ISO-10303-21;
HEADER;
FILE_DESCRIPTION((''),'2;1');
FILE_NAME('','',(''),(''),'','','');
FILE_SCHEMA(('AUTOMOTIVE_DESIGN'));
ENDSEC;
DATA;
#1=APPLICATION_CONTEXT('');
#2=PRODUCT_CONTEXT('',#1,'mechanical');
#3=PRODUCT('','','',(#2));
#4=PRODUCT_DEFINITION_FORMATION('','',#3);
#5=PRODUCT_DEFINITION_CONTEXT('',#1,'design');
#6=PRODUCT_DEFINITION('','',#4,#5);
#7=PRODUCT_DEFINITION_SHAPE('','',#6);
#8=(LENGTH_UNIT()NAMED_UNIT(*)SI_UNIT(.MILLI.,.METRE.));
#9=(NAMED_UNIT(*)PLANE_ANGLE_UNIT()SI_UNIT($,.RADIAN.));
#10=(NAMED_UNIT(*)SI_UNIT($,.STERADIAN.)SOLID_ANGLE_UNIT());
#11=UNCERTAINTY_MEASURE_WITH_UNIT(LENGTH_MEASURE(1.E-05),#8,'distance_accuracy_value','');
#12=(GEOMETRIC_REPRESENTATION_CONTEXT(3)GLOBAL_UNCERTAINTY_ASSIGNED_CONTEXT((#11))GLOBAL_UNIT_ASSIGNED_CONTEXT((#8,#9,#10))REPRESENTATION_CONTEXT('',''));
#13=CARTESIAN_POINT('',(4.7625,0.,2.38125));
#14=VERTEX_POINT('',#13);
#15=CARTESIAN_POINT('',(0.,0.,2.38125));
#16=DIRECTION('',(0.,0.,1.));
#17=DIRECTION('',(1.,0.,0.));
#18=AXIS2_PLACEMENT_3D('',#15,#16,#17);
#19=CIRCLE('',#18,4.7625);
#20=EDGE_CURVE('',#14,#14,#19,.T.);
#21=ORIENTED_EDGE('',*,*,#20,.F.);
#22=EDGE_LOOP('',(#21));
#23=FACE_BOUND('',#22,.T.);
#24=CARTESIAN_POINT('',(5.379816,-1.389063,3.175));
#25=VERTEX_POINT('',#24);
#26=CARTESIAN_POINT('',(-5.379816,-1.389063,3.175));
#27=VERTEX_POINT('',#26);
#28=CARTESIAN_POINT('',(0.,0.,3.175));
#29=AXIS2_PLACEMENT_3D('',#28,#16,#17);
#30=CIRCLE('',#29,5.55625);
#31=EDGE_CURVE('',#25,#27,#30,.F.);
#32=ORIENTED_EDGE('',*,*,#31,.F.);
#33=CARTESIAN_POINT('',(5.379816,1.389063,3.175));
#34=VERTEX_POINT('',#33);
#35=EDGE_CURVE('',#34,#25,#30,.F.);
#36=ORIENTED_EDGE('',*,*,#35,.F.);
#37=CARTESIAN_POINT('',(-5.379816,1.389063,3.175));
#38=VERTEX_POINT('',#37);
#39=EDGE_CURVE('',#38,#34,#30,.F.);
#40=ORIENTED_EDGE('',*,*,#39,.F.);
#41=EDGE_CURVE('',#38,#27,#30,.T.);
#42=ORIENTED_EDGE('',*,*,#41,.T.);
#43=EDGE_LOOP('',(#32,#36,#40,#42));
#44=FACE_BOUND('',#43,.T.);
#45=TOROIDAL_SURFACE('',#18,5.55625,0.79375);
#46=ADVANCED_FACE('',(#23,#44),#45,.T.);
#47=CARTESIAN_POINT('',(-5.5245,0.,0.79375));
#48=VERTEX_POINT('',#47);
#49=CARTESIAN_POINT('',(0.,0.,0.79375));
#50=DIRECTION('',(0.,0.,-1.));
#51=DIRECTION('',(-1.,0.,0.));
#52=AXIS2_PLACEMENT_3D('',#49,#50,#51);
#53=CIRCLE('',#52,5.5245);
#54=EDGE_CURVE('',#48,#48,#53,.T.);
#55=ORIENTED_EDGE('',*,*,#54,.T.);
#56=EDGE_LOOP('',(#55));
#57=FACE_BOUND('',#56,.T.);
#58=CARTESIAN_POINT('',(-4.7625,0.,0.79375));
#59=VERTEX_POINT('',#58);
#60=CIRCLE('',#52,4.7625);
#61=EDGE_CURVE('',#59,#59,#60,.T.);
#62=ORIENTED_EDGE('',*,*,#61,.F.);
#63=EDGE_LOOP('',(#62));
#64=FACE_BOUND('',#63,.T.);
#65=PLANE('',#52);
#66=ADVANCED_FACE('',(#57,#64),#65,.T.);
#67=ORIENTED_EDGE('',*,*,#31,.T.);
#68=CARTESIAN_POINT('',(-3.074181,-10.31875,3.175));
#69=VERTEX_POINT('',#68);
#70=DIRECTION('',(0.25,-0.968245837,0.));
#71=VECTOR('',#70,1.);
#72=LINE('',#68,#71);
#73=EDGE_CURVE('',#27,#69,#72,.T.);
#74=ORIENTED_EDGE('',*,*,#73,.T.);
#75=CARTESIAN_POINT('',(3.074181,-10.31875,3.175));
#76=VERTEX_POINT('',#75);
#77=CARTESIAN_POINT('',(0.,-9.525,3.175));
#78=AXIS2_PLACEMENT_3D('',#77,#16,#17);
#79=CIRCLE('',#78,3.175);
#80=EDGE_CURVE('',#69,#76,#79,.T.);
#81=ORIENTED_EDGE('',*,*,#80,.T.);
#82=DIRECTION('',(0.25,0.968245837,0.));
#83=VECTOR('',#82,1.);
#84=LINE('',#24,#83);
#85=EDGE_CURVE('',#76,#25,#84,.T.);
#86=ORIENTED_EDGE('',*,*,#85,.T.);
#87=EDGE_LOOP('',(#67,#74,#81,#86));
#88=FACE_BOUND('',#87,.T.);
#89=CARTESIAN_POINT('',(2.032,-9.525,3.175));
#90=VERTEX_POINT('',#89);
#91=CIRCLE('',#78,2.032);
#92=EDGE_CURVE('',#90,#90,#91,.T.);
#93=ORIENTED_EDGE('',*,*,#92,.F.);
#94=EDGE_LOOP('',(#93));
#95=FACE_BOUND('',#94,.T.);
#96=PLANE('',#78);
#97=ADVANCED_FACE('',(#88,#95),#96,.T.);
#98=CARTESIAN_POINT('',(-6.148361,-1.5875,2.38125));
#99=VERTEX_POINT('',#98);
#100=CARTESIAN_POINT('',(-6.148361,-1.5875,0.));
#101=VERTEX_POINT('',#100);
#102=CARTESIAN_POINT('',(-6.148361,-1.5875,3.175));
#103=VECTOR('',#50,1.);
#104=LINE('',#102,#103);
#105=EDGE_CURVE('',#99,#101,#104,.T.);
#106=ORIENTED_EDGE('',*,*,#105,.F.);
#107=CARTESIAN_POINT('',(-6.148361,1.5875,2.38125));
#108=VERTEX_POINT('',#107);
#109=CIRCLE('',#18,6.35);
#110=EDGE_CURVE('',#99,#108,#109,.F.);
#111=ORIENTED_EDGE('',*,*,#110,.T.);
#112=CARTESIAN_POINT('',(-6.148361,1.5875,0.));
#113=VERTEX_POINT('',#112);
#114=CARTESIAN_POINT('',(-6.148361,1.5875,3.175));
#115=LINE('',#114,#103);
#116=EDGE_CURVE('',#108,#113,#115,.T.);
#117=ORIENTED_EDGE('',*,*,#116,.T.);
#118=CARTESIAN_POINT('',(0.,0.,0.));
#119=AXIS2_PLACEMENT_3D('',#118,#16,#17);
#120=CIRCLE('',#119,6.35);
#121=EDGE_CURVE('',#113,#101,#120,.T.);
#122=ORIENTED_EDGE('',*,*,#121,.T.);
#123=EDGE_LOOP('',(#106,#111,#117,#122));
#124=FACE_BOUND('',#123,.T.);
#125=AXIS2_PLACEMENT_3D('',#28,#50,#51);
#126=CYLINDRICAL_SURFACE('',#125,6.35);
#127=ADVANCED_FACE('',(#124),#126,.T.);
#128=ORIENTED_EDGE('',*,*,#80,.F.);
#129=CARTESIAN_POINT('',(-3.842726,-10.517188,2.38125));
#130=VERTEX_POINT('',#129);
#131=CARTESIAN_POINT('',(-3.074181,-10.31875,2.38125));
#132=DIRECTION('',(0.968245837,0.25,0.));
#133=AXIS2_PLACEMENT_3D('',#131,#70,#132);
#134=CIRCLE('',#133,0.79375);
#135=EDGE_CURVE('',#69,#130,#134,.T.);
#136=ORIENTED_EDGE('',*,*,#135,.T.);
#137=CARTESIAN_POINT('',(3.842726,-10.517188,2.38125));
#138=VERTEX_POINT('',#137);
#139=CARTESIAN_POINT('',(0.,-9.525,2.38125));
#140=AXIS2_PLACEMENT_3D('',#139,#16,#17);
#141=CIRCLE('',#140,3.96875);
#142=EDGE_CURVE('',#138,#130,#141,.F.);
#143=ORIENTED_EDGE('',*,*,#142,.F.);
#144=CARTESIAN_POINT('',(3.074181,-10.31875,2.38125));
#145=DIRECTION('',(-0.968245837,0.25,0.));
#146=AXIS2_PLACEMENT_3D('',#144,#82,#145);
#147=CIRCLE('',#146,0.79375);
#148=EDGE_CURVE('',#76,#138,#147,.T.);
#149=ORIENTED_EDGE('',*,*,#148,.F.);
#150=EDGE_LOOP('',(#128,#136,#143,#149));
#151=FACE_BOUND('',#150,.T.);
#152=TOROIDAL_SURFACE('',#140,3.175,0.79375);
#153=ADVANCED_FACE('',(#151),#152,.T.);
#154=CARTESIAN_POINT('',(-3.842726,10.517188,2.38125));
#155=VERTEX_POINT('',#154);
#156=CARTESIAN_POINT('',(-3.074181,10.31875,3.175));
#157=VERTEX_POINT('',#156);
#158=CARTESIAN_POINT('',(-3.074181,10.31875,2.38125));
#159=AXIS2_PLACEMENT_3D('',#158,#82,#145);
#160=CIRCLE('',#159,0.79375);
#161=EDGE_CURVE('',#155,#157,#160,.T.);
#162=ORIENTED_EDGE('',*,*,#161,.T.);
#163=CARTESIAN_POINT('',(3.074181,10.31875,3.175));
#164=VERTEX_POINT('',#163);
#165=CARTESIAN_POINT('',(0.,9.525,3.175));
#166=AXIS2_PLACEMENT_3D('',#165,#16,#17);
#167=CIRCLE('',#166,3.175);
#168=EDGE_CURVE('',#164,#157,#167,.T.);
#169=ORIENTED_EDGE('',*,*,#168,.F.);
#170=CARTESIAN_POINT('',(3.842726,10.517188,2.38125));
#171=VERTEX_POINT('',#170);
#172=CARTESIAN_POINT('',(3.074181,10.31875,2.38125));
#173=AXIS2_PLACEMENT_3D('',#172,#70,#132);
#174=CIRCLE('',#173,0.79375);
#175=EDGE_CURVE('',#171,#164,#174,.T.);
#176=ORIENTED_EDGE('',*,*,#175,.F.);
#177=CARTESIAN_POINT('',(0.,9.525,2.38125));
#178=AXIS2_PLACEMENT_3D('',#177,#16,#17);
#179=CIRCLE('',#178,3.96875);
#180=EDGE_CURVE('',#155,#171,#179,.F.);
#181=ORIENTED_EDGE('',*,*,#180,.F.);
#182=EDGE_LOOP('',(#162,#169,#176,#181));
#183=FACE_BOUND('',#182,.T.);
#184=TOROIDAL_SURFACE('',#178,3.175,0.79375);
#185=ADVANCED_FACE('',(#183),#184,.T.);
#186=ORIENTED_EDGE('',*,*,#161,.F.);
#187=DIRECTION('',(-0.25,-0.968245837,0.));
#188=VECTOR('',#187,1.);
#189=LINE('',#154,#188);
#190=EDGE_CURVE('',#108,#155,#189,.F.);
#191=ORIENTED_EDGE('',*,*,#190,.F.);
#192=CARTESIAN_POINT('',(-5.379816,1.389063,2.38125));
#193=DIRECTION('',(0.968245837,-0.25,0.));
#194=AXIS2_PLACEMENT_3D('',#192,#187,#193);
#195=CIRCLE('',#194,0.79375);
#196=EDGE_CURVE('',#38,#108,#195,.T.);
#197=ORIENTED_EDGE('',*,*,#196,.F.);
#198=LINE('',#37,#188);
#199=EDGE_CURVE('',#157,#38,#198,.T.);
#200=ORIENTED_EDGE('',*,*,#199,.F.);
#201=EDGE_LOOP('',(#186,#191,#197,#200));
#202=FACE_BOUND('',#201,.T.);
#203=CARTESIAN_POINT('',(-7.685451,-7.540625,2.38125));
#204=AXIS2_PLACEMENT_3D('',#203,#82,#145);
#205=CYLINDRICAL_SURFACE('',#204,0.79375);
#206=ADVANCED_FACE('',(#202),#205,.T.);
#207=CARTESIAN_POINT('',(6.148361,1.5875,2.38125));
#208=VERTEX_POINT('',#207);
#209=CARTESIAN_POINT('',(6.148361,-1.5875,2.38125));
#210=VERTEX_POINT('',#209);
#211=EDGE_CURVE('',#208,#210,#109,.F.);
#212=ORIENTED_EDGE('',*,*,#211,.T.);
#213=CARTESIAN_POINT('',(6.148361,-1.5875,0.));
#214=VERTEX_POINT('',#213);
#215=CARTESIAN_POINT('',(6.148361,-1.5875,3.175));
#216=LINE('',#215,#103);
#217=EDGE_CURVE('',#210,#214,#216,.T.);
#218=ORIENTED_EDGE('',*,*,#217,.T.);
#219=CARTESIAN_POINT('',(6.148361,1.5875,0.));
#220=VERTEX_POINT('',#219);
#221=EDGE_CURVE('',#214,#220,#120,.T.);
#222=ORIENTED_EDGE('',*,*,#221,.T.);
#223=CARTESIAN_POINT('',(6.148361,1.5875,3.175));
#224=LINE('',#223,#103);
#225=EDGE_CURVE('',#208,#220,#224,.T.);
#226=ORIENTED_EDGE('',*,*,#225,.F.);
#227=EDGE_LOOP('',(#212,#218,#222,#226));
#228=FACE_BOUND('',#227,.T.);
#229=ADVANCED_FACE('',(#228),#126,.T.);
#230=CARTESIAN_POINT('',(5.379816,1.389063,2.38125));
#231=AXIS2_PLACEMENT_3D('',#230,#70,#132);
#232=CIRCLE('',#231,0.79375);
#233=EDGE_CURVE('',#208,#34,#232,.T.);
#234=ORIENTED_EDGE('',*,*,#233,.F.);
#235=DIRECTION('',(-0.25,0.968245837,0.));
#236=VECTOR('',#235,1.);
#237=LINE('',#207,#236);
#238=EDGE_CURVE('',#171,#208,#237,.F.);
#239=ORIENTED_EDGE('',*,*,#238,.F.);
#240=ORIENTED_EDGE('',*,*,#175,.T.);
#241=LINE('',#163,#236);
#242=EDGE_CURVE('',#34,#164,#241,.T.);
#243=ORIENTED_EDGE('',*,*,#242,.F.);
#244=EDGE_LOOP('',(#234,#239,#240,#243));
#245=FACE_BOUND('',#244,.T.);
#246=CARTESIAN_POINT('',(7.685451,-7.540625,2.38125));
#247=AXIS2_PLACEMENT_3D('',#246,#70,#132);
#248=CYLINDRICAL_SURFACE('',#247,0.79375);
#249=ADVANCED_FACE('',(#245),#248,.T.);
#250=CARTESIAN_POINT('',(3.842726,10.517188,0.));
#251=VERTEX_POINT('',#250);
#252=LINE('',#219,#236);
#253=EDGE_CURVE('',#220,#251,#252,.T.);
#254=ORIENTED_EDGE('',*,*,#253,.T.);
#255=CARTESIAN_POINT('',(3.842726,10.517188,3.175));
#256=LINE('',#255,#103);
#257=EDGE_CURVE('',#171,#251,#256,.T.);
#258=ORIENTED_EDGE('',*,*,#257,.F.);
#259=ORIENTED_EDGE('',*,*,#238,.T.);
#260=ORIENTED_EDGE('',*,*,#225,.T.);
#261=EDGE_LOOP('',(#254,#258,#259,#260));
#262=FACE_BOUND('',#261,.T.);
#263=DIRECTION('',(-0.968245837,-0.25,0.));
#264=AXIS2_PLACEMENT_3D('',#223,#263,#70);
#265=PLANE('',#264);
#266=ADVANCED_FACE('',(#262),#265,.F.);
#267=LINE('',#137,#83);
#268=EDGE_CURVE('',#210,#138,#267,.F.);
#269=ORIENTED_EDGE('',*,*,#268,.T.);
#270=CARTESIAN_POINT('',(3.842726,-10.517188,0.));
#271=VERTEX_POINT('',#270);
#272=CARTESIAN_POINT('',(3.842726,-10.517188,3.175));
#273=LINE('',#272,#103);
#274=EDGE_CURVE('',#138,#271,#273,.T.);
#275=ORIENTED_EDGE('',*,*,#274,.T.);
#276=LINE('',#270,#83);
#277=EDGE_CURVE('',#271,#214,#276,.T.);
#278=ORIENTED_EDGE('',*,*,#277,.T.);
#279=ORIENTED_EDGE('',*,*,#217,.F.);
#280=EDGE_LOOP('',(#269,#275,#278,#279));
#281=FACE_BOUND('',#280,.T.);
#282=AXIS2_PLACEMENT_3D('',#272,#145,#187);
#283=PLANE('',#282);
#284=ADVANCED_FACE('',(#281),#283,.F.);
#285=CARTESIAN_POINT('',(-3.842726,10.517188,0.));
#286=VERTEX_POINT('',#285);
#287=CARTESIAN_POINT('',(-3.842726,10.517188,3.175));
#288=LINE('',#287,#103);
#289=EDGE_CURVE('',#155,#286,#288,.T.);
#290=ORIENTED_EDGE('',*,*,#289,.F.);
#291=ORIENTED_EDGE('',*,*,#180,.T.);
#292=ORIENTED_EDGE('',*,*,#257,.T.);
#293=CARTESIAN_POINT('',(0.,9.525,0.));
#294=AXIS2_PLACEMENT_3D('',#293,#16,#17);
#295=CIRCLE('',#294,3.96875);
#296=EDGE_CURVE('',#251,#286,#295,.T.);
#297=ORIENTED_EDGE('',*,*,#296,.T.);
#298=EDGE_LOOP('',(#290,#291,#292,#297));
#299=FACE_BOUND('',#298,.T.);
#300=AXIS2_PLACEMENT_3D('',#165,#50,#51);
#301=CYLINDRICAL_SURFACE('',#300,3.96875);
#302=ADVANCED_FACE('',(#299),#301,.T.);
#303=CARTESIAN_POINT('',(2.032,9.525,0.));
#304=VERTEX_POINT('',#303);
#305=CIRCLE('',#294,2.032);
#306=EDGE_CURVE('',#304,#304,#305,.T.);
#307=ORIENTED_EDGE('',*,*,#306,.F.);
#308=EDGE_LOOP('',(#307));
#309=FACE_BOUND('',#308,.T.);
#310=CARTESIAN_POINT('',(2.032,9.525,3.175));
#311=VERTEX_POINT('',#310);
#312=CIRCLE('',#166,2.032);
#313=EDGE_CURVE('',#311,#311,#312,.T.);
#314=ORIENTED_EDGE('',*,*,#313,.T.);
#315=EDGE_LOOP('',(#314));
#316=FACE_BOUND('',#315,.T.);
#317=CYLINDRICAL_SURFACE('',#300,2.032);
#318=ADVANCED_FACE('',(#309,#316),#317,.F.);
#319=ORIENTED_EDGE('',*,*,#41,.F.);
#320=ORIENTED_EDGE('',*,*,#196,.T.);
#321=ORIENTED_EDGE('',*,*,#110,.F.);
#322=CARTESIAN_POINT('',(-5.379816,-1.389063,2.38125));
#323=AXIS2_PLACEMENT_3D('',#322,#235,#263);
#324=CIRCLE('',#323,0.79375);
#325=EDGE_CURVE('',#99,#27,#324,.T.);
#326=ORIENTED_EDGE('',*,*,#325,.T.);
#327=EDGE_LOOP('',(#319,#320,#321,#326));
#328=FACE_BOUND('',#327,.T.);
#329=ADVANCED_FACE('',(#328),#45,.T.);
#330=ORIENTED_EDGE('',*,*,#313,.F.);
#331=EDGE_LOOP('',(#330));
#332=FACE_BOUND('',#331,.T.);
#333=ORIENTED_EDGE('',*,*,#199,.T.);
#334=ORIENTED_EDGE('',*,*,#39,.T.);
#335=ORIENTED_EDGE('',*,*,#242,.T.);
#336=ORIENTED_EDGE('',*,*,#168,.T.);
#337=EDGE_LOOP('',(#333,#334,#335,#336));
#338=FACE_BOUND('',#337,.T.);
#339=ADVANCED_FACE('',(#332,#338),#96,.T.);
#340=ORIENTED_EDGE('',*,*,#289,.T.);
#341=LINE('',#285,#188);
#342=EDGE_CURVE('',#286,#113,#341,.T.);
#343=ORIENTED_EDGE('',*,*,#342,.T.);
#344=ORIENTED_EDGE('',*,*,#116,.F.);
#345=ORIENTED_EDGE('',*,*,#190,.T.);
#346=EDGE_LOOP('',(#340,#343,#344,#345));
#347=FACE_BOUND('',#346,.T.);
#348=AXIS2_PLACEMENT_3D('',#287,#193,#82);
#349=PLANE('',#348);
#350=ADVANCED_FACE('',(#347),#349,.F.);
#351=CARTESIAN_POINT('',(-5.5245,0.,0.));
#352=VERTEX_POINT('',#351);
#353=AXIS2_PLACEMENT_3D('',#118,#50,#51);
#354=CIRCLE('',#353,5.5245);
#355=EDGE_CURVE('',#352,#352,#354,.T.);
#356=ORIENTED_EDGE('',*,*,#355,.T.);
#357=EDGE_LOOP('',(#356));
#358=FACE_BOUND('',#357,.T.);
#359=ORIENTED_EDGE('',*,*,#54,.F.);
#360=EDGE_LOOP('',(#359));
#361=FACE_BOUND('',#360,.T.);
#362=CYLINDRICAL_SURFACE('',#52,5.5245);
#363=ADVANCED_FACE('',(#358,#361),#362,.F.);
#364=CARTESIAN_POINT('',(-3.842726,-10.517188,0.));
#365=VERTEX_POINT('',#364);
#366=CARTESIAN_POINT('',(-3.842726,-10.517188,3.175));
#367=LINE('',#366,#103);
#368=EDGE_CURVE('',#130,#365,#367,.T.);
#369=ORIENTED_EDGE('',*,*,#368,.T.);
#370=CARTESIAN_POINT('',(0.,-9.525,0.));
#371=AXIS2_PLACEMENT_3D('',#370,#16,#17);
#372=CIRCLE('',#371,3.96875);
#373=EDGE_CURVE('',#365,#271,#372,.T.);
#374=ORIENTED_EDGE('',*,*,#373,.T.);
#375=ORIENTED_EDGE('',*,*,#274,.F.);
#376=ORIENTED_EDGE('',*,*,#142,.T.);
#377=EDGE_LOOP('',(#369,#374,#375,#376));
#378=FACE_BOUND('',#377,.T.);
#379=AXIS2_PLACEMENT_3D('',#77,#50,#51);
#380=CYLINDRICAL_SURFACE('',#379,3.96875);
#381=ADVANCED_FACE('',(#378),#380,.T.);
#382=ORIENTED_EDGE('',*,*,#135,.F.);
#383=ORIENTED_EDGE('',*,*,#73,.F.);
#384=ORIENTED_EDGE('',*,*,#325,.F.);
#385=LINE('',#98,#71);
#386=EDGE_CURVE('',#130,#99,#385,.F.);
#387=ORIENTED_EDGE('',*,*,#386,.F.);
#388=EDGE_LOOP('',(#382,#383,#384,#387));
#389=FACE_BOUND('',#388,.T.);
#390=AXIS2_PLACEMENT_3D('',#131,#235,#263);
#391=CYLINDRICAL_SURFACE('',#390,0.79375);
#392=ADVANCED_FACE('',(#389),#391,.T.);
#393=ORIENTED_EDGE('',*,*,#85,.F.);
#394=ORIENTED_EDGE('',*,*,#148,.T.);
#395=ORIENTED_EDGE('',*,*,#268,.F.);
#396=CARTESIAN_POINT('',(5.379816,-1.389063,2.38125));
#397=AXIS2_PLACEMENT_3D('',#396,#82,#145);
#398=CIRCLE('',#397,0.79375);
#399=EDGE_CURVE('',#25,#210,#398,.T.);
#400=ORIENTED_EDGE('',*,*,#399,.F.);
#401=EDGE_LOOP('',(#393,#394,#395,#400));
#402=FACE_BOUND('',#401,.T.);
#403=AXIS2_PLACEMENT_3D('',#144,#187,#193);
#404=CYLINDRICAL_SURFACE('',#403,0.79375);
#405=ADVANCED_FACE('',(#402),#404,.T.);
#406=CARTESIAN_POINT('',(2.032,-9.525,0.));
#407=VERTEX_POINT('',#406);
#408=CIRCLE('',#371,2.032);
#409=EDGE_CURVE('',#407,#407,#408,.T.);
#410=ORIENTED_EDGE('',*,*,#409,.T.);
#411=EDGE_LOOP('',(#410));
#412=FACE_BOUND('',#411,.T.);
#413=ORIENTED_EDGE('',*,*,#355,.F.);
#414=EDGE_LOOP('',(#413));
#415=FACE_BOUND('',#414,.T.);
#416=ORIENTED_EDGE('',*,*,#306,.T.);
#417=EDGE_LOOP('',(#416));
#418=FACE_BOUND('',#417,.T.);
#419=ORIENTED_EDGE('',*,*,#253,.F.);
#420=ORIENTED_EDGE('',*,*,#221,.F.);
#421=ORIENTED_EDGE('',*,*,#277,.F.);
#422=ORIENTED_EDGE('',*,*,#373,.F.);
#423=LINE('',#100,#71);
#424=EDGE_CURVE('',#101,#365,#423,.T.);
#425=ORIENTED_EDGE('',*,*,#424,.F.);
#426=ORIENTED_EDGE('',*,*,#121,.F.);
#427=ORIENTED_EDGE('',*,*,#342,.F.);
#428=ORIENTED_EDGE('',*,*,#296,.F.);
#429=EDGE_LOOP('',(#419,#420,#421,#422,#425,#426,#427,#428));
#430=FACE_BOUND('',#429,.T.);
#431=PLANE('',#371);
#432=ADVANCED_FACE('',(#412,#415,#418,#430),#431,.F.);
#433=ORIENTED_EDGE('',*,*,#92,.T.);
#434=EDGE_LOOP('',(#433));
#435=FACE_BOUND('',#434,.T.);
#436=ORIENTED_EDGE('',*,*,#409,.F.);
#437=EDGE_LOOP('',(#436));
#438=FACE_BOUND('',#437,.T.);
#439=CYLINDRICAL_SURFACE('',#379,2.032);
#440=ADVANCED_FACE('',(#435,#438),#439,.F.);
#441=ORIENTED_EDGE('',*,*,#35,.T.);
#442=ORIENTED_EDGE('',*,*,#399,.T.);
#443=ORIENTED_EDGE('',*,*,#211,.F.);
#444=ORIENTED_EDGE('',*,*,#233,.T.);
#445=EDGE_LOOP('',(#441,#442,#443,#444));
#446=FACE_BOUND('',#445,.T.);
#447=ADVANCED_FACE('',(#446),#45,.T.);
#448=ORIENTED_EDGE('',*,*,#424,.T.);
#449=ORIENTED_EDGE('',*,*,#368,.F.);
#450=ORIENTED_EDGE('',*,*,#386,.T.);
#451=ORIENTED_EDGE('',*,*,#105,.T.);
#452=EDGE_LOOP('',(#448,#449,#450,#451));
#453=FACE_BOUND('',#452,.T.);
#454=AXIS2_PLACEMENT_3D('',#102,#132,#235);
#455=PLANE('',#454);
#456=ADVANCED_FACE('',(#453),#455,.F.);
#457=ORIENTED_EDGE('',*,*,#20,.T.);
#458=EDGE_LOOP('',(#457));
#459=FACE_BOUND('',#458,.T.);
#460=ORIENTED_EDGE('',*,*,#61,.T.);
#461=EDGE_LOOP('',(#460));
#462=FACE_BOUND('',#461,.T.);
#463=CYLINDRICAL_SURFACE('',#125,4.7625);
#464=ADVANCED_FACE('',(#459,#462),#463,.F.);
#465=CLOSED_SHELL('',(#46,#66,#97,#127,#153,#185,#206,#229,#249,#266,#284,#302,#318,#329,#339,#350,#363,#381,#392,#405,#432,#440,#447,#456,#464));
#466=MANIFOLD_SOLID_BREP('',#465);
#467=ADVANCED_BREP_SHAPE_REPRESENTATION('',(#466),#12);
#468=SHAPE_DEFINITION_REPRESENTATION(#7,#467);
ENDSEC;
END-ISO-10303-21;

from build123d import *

# Parameters (mm, degrees)
SKETCH1_R           = 2.032
SKETCH1_R_2         = 4.7625
BOSS_EXTRUDE1_DEPTH = 3.175
SKETCH2_R           = 5.5245
CUT_EXTRUDE3_DEPTH  = 0.79375
FILLET1_R           = 0.79375


with BuildPart() as part:
    # Sketch1 → Boss-Extrude1 (new body)
    with BuildSketch(Plane.XY):
        with BuildLine():
            Line((3.842725664, -10.5171875), (6.148361062, -1.5875))
            ThreePointArc((6.148361062, -1.5875), (6.35, 0), (6.148361062, 1.5875))
            Line((6.148361062, 1.5875), (3.842725664, 10.5171875))
            ThreePointArc((3.842725664, 10.5171875), (0, 13.49375), (-3.842725664, 10.5171875))
            Line((-3.842725664, 10.5171875), (-6.148361062, 1.5875))
            ThreePointArc((-6.148361062, 1.5875), (-6.35, 0), (-6.148361062, -1.5875))
            Line((-6.148361062, -1.5875), (-3.842725664, -10.5171875))
            ThreePointArc((-3.842725664, -10.5171875), (0, -13.49375), (3.842725664, -10.5171875))
        make_face()
        with Locations((0, 9.525)):
            Circle(SKETCH1_R, mode=Mode.SUBTRACT)
        with Locations((0, -9.525)):
            Circle(SKETCH1_R, mode=Mode.SUBTRACT)
        Circle(SKETCH1_R_2, mode=Mode.SUBTRACT)
    extrude(amount=BOSS_EXTRUDE1_DEPTH)

    # Sketch2 → Cut-Extrude3 (cut)
    with BuildSketch(Plane(origin=(0, 0, 0), x_dir=(-1, 0, 0), z_dir=(0, 0, -1))):
        Circle(SKETCH2_R)
    extrude(amount=-CUT_EXTRUDE3_DEPTH, mode=Mode.SUBTRACT)

    # Fillet1
    fillet1_edges = [part.edges().sort_by_distance(p)[0] for p in [
        (6.35, 0, 3.175),
        (4.995543363, 6.05234375, 3.175),
        (0, 13.49375, 3.175),
        (-4.995543363, 6.05234375, 3.175),
        (-6.35, 0, 3.175),
        (-4.7625, 0, 3.175),
        (-4.995543363, -6.05234375, 3.175),
        (0, -13.49375, 3.175),
        (4.995543363, -6.05234375, 3.175),
    ]]
    fillet(fillet1_edges, radius=FILLET1_R - 0.0001)  # a hair under: the kernel refuses the full size


solid = part.part
